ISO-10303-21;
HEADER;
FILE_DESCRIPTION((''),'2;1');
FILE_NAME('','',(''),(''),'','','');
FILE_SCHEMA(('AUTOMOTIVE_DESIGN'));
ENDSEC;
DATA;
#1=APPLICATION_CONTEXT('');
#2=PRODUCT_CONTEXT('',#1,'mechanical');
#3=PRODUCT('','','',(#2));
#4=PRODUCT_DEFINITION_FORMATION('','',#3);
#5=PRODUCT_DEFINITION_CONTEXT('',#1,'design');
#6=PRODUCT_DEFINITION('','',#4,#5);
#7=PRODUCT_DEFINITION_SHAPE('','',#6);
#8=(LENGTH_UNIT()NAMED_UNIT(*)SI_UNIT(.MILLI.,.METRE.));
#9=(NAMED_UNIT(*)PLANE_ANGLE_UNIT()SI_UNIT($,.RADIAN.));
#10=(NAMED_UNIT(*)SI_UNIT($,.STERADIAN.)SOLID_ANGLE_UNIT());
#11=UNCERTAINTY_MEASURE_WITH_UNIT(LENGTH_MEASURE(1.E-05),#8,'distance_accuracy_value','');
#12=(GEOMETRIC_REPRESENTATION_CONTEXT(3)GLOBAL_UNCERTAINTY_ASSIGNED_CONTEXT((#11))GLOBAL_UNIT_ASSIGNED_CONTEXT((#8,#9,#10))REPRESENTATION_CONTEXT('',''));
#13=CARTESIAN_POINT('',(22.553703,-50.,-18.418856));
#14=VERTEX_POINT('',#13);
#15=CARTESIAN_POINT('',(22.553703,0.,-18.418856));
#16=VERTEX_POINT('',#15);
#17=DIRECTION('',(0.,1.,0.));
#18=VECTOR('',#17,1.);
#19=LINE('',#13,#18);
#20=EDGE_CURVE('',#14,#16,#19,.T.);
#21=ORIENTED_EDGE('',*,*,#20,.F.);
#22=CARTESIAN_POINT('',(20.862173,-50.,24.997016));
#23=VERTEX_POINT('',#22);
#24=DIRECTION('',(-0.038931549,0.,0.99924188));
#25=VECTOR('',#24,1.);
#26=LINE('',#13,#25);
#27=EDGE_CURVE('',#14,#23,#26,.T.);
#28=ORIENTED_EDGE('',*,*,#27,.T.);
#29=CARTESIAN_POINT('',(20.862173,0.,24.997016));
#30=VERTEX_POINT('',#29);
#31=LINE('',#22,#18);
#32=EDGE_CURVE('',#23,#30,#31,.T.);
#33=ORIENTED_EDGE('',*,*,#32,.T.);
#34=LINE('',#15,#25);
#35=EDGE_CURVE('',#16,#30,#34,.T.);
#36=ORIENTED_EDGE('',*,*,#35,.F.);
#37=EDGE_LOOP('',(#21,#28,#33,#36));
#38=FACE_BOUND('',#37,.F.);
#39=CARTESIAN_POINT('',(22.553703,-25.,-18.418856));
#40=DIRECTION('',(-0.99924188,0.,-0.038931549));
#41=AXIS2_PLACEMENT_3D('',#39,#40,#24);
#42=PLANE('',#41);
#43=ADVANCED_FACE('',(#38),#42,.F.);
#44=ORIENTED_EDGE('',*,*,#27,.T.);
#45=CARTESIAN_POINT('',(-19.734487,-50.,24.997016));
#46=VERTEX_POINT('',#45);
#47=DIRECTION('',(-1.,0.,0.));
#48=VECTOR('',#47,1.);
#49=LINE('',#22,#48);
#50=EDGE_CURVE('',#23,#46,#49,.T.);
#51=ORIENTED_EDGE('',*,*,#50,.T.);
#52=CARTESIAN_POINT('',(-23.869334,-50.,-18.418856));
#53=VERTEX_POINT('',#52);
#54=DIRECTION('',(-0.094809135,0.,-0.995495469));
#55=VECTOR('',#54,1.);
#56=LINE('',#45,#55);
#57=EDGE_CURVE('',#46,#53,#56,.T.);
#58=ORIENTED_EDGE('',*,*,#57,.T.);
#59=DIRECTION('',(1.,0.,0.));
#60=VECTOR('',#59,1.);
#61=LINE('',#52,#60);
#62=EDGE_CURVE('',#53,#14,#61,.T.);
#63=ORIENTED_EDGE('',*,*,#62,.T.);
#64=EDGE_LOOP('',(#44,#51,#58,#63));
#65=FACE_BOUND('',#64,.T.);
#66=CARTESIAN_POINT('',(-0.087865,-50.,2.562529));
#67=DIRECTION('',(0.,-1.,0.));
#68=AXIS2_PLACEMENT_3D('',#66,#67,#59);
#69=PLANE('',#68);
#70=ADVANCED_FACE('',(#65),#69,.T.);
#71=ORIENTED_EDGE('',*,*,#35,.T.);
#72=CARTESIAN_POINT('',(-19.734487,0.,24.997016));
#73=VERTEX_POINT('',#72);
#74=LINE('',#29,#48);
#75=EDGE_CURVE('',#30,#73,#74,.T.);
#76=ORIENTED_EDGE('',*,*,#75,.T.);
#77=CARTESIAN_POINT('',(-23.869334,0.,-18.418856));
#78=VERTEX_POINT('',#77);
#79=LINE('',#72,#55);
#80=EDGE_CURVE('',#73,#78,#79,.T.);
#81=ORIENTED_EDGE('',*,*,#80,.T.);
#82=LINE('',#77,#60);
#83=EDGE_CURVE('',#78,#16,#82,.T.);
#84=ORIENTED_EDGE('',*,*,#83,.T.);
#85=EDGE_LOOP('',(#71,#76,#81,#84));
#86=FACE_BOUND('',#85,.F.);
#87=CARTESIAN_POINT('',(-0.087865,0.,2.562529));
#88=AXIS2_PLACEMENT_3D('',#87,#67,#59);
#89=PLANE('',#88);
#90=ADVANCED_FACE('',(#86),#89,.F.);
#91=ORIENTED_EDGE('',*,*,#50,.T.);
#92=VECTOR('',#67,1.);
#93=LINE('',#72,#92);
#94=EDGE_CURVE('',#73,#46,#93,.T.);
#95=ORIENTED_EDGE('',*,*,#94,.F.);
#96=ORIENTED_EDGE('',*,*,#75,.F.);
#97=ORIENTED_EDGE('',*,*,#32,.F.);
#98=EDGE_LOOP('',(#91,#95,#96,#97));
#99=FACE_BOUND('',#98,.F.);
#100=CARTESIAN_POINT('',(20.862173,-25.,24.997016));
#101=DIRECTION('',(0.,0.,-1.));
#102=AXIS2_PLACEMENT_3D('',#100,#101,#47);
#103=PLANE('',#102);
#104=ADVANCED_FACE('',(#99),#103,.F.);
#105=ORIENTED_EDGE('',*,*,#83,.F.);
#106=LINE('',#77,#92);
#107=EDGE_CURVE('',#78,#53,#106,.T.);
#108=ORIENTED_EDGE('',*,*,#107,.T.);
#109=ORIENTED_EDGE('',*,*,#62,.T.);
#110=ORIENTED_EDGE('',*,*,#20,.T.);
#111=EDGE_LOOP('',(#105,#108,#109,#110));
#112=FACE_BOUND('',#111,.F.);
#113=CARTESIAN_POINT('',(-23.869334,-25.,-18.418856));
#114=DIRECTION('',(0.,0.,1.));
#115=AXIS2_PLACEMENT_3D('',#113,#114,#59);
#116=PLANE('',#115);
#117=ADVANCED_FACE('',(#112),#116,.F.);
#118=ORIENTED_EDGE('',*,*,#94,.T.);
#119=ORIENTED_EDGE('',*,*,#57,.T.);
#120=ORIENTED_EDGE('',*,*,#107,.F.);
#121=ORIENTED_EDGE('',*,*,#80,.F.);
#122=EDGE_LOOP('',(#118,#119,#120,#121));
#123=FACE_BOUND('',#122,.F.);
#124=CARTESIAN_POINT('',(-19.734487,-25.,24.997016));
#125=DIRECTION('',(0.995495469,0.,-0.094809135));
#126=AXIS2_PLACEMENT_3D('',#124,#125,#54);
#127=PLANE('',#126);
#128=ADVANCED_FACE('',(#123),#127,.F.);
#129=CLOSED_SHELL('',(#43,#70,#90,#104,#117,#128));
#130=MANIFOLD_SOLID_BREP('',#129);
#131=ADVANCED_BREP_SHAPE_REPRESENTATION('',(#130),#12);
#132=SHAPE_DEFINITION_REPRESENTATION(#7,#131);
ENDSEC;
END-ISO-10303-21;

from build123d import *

# Parameters (mm, degrees)
F1_DEPTH = 25
F3_DEPTH = 25


# Not quite as in the source:
# - the program builds the solid bodies; features that only make, move or delete a surface that nothing else refers to are left out


with BuildPart() as f1:
    # F0 (on Front) → F1 (new body)
    with BuildSketch(Plane.XZ):
        Polygon((20.8621732891, 24.997016415), (-19.7344869375, 24.997016415), (-23.8693337888, -18.4188559651), (22.5537028164, -18.4188559651), align=None)
    extrude(amount=F1_DEPTH)

    # F3 (add): a face of the model
    f3_faces = [f1.faces().sort_by_distance(p)[0] for p in [
        (-0.0606187837, -25, 2.8045975494),
    ]]
    extrude(f3_faces, amount=F3_DEPTH)


solid = f1.part
